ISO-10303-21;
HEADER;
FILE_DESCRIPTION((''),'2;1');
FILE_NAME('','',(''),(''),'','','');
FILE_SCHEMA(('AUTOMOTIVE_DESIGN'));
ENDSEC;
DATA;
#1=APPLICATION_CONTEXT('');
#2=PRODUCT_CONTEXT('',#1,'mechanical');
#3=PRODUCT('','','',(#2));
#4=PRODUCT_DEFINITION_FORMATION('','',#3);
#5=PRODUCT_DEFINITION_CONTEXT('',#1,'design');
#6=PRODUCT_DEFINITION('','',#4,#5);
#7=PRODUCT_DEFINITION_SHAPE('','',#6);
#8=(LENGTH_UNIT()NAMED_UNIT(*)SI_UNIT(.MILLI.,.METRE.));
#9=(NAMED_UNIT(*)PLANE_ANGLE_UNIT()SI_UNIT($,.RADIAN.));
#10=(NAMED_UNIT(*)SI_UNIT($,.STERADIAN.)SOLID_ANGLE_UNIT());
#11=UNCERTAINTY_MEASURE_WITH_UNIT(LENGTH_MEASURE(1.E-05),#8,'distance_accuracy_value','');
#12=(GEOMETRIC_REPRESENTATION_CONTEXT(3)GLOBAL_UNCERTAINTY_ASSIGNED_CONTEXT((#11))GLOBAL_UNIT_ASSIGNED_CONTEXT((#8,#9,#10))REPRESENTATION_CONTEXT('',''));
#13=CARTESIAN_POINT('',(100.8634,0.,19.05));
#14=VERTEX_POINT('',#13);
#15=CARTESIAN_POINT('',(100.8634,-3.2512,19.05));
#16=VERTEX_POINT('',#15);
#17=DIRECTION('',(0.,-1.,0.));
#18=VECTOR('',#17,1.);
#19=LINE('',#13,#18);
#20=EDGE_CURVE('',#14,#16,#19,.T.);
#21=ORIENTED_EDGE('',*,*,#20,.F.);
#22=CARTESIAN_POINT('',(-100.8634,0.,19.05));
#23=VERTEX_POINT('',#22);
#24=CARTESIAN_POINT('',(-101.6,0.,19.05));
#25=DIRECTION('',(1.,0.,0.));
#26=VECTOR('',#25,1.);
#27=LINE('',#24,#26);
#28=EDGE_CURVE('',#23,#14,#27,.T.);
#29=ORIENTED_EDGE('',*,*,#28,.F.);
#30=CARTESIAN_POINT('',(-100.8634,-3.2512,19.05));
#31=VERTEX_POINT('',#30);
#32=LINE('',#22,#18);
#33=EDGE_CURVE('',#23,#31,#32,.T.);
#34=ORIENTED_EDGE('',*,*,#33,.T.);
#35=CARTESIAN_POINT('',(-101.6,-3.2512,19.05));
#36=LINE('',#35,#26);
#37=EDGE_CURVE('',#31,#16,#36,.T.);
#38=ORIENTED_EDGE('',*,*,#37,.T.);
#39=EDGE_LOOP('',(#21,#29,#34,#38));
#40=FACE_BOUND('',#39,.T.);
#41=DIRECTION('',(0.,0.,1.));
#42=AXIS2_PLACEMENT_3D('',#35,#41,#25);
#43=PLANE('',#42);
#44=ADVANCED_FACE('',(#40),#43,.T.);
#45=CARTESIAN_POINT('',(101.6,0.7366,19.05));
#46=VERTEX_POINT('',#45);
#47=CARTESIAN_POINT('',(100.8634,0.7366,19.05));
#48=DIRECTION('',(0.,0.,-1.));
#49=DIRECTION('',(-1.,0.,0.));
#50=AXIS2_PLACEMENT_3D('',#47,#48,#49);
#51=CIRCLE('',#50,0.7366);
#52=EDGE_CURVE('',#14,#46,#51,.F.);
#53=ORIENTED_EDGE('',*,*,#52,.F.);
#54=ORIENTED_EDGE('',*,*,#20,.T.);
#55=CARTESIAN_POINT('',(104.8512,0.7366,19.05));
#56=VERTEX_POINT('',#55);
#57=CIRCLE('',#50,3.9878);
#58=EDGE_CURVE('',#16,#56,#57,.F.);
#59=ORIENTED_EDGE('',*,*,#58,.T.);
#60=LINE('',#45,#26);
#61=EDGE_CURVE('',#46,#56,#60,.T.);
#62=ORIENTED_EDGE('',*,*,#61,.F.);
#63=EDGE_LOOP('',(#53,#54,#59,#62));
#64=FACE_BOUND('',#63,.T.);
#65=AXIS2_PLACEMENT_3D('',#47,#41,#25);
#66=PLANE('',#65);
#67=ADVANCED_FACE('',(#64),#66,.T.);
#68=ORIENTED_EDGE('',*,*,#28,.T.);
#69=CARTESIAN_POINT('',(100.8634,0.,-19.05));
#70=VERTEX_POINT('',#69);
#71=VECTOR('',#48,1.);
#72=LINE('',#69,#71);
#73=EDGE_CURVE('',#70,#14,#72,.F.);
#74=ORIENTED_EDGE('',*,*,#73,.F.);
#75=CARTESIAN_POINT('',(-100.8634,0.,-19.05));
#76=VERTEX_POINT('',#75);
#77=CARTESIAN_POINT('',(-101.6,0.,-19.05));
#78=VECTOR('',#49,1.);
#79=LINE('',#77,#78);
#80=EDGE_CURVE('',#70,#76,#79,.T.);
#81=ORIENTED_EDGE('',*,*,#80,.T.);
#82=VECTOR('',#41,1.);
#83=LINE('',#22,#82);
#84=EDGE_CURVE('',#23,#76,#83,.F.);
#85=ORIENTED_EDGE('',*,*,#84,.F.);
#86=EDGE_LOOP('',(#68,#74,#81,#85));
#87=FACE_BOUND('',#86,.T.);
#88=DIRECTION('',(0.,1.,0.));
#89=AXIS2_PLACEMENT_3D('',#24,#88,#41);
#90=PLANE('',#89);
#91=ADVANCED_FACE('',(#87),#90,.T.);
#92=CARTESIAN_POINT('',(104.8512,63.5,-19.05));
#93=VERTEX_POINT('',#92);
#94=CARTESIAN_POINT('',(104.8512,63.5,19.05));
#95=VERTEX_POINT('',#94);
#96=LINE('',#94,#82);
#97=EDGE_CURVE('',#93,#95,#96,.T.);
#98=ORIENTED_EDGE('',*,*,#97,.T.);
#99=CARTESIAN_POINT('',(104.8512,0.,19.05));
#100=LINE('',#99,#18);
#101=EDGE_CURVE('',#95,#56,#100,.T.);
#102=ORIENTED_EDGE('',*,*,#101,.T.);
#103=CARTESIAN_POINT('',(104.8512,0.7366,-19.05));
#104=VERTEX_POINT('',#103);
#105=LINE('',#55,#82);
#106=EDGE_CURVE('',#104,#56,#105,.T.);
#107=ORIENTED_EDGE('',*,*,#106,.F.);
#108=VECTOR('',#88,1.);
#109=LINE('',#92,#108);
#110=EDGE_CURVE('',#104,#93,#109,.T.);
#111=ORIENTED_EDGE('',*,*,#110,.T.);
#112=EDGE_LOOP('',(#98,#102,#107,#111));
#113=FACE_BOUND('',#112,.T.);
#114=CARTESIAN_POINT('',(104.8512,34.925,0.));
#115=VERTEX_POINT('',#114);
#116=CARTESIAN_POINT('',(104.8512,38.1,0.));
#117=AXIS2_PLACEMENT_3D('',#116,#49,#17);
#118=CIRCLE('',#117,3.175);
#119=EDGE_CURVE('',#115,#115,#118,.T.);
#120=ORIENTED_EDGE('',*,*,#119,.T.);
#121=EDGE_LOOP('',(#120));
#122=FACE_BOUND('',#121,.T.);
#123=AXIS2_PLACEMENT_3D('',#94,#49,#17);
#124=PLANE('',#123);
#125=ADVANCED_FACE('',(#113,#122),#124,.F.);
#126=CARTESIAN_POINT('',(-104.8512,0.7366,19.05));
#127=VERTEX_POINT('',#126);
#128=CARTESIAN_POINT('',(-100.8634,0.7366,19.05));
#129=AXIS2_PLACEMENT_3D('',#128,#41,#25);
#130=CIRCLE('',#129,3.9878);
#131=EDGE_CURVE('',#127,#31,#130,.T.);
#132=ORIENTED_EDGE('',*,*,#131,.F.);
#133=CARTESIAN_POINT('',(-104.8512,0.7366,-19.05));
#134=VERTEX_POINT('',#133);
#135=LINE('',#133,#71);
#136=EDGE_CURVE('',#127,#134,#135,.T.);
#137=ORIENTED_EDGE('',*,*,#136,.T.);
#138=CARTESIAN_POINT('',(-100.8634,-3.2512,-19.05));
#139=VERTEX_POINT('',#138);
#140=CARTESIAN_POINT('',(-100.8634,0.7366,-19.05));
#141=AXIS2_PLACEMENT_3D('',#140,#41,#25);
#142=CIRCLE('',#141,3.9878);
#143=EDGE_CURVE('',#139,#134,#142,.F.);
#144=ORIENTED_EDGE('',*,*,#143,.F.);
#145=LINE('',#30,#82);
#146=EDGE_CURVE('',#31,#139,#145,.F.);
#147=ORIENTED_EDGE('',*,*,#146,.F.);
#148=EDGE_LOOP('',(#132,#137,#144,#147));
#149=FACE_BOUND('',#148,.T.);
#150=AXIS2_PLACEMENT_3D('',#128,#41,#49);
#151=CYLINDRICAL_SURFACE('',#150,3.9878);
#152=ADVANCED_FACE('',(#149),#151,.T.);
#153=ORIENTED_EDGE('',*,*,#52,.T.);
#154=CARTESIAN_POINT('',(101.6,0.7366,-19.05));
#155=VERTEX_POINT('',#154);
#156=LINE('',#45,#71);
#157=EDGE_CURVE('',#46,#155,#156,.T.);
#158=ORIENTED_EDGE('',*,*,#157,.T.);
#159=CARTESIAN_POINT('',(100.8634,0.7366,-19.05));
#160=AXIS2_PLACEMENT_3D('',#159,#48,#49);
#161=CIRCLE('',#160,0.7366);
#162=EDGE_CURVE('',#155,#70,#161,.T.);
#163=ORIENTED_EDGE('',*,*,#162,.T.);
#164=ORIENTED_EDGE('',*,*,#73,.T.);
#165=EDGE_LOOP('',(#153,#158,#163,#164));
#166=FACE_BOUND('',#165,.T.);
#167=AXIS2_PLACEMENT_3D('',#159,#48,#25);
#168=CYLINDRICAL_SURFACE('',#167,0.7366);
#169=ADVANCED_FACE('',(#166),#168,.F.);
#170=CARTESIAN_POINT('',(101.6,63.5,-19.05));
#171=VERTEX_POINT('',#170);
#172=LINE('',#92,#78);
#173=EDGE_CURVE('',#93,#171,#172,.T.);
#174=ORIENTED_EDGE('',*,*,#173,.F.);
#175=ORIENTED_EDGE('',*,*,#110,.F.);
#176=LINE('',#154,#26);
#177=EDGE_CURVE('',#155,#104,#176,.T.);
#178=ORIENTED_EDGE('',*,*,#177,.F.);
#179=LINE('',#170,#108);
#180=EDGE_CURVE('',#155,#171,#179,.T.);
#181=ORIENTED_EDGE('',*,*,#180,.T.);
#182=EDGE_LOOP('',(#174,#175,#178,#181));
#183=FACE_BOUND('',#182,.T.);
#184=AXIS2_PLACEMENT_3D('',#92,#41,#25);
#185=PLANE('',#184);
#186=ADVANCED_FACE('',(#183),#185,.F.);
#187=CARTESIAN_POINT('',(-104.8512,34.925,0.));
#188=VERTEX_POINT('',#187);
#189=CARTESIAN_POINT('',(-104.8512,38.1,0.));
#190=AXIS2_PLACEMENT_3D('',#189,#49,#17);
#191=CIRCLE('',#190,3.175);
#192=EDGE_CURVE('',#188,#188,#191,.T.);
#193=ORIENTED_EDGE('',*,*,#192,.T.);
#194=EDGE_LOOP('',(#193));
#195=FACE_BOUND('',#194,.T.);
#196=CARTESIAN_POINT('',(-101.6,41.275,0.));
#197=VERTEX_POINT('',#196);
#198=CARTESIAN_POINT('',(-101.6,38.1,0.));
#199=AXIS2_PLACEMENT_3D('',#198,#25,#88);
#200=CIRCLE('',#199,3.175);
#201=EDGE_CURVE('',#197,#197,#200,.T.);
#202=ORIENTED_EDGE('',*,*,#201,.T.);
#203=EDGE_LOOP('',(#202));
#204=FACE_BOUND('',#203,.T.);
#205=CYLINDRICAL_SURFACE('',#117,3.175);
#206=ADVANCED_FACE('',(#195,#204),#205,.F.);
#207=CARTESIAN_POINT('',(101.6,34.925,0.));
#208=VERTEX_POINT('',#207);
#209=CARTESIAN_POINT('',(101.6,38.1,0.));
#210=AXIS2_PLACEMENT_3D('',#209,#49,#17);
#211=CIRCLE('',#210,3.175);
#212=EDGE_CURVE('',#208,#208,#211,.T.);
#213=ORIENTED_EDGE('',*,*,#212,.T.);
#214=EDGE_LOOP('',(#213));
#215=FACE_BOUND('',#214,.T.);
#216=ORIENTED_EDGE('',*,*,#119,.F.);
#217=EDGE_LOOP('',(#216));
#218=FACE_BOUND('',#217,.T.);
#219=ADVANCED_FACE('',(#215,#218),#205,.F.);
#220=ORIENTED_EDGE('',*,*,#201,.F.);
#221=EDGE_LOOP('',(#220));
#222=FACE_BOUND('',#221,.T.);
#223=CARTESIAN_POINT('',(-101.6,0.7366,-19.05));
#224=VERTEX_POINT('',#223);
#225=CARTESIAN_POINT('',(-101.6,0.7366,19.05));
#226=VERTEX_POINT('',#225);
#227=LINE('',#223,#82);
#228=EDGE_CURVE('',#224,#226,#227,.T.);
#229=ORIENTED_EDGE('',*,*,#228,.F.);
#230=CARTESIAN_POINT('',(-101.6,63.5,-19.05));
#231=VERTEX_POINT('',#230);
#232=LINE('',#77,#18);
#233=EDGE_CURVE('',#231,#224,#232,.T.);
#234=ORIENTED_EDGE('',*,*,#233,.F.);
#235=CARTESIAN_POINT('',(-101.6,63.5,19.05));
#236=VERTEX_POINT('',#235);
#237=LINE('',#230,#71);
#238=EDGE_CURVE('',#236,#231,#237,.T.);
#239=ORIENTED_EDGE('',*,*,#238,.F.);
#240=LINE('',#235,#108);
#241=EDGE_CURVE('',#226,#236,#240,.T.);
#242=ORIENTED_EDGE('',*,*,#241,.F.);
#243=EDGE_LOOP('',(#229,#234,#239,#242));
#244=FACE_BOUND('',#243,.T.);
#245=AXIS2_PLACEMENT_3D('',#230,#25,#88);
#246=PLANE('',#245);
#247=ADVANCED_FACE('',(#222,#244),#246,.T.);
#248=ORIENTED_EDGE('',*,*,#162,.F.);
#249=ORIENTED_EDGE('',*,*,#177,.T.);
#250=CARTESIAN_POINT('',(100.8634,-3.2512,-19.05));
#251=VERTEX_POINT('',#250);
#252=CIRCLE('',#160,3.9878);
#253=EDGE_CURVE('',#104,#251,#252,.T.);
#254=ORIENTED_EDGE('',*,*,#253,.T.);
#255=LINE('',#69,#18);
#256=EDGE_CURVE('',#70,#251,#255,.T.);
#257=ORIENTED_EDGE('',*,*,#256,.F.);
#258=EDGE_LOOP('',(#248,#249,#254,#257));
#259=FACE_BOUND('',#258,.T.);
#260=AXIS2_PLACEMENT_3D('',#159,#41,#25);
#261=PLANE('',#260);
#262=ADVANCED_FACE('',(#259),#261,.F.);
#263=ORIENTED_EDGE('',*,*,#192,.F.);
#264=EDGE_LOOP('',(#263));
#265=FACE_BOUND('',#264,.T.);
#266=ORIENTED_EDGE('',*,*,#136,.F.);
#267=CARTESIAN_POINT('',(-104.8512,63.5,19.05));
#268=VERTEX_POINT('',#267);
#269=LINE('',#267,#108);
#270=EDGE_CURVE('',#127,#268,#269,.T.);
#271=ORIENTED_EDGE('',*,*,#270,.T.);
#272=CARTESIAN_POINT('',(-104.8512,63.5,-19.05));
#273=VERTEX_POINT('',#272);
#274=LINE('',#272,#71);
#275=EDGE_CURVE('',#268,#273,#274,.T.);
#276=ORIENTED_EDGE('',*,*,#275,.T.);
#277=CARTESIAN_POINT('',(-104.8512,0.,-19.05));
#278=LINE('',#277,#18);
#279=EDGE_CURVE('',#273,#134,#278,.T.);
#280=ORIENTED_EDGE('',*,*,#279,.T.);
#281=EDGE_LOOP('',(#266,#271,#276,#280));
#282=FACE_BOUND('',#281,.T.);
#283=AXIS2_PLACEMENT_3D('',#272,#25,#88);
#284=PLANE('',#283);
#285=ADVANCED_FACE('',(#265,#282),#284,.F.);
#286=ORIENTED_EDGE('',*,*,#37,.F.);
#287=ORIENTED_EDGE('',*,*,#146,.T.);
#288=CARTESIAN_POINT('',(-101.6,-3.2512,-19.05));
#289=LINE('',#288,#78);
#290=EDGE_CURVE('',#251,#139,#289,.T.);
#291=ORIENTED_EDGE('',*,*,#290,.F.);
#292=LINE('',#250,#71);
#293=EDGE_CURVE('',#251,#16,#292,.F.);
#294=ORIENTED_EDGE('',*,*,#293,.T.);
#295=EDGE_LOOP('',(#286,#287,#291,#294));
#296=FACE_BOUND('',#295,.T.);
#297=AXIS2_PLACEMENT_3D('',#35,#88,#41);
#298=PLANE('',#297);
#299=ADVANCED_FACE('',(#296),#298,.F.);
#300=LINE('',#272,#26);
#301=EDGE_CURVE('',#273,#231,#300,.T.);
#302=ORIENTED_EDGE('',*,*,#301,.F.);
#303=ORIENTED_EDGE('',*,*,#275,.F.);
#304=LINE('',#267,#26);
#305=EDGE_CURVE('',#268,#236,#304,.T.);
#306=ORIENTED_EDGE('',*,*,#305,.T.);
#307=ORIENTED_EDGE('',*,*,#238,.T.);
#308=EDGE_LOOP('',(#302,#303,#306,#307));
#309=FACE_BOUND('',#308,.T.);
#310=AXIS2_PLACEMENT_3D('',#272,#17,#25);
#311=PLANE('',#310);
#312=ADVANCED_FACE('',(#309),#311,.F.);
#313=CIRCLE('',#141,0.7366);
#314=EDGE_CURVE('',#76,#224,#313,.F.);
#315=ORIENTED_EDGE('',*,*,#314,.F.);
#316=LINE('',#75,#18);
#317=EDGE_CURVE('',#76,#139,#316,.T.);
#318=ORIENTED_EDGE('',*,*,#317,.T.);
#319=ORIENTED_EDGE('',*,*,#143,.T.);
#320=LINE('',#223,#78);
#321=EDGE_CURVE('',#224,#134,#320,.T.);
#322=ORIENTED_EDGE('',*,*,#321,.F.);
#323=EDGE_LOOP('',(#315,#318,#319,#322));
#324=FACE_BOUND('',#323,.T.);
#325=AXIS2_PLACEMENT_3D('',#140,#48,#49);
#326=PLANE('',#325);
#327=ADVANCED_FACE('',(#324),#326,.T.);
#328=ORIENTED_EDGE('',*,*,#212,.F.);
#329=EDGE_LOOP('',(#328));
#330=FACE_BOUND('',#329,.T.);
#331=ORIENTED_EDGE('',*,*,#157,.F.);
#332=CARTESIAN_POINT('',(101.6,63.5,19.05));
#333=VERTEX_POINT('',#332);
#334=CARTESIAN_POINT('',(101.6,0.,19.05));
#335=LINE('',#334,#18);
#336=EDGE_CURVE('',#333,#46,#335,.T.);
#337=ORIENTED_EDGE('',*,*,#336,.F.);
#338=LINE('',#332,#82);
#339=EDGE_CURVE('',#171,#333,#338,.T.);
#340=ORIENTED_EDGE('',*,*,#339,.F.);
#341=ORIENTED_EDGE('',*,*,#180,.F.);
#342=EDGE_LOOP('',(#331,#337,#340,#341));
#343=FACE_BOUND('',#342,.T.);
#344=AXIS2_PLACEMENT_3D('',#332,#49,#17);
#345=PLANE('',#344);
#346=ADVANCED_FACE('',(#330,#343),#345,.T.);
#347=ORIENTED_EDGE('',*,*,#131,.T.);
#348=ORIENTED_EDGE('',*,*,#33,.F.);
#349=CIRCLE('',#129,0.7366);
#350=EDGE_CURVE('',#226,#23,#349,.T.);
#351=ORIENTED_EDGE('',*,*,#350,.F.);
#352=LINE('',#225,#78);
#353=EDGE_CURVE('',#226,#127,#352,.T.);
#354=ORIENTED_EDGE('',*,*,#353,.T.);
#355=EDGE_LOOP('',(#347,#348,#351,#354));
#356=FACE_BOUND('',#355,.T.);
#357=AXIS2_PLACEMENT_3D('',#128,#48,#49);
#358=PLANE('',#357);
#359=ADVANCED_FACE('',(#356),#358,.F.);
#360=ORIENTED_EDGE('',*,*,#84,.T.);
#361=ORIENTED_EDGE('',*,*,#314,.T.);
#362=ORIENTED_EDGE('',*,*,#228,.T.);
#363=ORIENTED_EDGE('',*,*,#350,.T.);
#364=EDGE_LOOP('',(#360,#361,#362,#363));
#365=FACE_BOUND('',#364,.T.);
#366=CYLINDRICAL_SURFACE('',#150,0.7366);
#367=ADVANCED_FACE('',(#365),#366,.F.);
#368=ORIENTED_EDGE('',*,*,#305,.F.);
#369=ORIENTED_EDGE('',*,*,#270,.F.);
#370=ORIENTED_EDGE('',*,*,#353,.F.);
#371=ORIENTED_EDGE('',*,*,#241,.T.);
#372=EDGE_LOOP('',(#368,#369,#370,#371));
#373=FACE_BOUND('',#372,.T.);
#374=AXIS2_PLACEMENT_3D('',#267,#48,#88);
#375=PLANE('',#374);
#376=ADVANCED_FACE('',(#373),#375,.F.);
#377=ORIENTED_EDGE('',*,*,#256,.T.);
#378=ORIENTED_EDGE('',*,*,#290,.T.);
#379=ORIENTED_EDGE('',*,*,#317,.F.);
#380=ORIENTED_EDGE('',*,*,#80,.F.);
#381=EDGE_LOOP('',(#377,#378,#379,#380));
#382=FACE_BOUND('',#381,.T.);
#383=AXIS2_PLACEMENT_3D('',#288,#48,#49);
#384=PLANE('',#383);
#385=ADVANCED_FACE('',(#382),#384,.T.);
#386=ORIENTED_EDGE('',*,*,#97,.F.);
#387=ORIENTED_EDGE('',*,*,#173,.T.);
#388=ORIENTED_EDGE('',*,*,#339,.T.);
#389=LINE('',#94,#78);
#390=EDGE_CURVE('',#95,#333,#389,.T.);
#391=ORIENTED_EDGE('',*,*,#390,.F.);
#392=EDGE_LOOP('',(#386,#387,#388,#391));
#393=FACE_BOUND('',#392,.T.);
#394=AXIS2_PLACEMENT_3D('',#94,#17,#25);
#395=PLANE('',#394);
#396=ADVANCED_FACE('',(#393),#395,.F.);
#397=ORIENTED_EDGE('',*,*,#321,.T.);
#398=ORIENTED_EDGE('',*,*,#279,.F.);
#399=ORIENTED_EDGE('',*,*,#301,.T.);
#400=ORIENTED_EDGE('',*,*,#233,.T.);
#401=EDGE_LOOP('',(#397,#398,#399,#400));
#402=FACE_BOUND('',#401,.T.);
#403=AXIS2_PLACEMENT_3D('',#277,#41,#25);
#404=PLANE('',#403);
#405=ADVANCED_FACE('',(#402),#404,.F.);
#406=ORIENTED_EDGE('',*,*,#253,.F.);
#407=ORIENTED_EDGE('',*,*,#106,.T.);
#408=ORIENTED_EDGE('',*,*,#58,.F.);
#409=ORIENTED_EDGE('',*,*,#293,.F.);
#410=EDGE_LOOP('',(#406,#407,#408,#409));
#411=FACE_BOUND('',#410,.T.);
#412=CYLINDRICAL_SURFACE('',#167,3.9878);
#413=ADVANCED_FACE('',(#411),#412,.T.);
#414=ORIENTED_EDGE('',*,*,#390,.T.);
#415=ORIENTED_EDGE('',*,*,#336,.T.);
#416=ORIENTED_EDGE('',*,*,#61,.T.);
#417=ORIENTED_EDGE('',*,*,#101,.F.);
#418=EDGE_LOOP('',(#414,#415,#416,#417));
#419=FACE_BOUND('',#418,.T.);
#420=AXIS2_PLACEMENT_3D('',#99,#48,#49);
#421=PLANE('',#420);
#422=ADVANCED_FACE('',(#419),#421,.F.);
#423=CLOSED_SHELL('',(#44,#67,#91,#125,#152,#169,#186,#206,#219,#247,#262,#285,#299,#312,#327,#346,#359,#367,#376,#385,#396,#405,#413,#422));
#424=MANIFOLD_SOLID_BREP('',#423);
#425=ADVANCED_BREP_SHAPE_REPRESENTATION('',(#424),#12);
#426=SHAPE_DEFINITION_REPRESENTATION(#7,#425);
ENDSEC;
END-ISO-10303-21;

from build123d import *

# Parameters (mm, degrees)
SKETCH1_W                      = 203.2
SKETCH1_H                      = 38.1
BASE_FLANGE1_DEPTH             = 3.2512
EDGE_FLANGE1_STRIP_W           = 14.478
EDGE_FLANGE1_STRIP_H           = 3.2512
EDGE_FLANGE1_STRIP_CUT_DEPTH   = 38.1
EDGE_FLANGE1_STRIP_2_W         = 14.478
EDGE_FLANGE1_STRIP_2_H         = 3.2512
EDGE_FLANGE1_STRIP_CUT_2_DEPTH = 38.1
EDGE_FLANGE1_DEPTH             = 38.1
EDGE_FLANGE1_BEND_DEPTH        = 38.1
SKETCH10_R                     = 3.175
CUT_EXTRUDE1_DEPTH             = 220.932373847


# Sheet-metal steps are written as plain solids
with BuildPart() as part:
    # Sketch1 → Base-Flange1 (new body)
    with BuildSketch(Plane(origin=(0, 0, 0), x_dir=(1, 0, 0), z_dir=(0, 1, 0))):
        Rectangle(SKETCH1_W, SKETCH1_H)
    extrude(amount=-BASE_FLANGE1_DEPTH)

    # Edge-Flange1 strip (across the edge) → Edge-Flange1 strip cut (cut)
    with BuildSketch(Plane(origin=(-101.6, 0, -19.05), x_dir=(1, 0, 0), z_dir=(0, 0, 1))):
        with Locations((-6.5024, -1.6256)):
            Rectangle(EDGE_FLANGE1_STRIP_W, EDGE_FLANGE1_STRIP_H)
    extrude(amount=EDGE_FLANGE1_STRIP_CUT_DEPTH, mode=Mode.SUBTRACT)

    # Edge-Flange1 strip 2 (across the edge) → Edge-Flange1 strip cut 2 (cut)
    with BuildSketch(Plane(origin=(101.6, 0, 19.05), x_dir=(-1, 0, 0), z_dir=(0, 0, -1))):
        with Locations((-6.5024, -1.6256)):
            Rectangle(EDGE_FLANGE1_STRIP_2_W, EDGE_FLANGE1_STRIP_2_H)
    extrude(amount=EDGE_FLANGE1_STRIP_CUT_2_DEPTH, mode=Mode.SUBTRACT)

    # Edge-Flange1 section (across the edge) → Edge-Flange1 (add)
    with BuildSketch(Plane(origin=(-101.6, 0, -19.05), x_dir=(1, 0, 0), z_dir=(0, 0, 1))):
        with BuildLine():
            Line((-3.2512, 0.7366), (-3.2512, 63.5))
            Line((-3.2512, 63.5), (0, 63.5))
            Line((0, 63.5), (0, 0.7366))
            ThreePointArc((0, 0.7366), (0.215745145, 0.215745145), (0.7366, 0))
            Line((0.7366, 0), (0.7366, -3.2512))
            ThreePointArc((0.7366, -3.2512), (-2.083200422, -2.083200422), (-3.2512, 0.7366))
        make_face()
    extrude(amount=EDGE_FLANGE1_DEPTH)

    # Edge-Flange1 section 2 (across the edge) → Edge-Flange1 bend (add)
    with BuildSketch(Plane(origin=(101.6, 0, 19.05), x_dir=(-1, 0, 0), z_dir=(0, 0, -1))):
        with BuildLine():
            Line((-3.2512, 0.7366), (-3.2512, 63.5))
            Line((-3.2512, 63.5), (0, 63.5))
            Line((0, 63.5), (0, 0.7366))
            ThreePointArc((0, 0.7366), (0.215745145, 0.215745145), (0.7366, 0))
            Line((0.7366, 0), (0.7366, -3.2512))
            ThreePointArc((0.7366, -3.2512), (-2.083200422, -2.083200422), (-3.2512, 0.7366))
        make_face()
    extrude(amount=EDGE_FLANGE1_BEND_DEPTH)

    # Sketch10 → Cut-Extrude1 (cut, through all)
    with BuildSketch(Plane.ZY.offset(104.8512)):
        with Locations(Location((0, 38.1, 0), (0, 0, 270))):
            Circle(SKETCH10_R)
    extrude(amount=-CUT_EXTRUDE1_DEPTH, mode=Mode.SUBTRACT)


solid = part.part
